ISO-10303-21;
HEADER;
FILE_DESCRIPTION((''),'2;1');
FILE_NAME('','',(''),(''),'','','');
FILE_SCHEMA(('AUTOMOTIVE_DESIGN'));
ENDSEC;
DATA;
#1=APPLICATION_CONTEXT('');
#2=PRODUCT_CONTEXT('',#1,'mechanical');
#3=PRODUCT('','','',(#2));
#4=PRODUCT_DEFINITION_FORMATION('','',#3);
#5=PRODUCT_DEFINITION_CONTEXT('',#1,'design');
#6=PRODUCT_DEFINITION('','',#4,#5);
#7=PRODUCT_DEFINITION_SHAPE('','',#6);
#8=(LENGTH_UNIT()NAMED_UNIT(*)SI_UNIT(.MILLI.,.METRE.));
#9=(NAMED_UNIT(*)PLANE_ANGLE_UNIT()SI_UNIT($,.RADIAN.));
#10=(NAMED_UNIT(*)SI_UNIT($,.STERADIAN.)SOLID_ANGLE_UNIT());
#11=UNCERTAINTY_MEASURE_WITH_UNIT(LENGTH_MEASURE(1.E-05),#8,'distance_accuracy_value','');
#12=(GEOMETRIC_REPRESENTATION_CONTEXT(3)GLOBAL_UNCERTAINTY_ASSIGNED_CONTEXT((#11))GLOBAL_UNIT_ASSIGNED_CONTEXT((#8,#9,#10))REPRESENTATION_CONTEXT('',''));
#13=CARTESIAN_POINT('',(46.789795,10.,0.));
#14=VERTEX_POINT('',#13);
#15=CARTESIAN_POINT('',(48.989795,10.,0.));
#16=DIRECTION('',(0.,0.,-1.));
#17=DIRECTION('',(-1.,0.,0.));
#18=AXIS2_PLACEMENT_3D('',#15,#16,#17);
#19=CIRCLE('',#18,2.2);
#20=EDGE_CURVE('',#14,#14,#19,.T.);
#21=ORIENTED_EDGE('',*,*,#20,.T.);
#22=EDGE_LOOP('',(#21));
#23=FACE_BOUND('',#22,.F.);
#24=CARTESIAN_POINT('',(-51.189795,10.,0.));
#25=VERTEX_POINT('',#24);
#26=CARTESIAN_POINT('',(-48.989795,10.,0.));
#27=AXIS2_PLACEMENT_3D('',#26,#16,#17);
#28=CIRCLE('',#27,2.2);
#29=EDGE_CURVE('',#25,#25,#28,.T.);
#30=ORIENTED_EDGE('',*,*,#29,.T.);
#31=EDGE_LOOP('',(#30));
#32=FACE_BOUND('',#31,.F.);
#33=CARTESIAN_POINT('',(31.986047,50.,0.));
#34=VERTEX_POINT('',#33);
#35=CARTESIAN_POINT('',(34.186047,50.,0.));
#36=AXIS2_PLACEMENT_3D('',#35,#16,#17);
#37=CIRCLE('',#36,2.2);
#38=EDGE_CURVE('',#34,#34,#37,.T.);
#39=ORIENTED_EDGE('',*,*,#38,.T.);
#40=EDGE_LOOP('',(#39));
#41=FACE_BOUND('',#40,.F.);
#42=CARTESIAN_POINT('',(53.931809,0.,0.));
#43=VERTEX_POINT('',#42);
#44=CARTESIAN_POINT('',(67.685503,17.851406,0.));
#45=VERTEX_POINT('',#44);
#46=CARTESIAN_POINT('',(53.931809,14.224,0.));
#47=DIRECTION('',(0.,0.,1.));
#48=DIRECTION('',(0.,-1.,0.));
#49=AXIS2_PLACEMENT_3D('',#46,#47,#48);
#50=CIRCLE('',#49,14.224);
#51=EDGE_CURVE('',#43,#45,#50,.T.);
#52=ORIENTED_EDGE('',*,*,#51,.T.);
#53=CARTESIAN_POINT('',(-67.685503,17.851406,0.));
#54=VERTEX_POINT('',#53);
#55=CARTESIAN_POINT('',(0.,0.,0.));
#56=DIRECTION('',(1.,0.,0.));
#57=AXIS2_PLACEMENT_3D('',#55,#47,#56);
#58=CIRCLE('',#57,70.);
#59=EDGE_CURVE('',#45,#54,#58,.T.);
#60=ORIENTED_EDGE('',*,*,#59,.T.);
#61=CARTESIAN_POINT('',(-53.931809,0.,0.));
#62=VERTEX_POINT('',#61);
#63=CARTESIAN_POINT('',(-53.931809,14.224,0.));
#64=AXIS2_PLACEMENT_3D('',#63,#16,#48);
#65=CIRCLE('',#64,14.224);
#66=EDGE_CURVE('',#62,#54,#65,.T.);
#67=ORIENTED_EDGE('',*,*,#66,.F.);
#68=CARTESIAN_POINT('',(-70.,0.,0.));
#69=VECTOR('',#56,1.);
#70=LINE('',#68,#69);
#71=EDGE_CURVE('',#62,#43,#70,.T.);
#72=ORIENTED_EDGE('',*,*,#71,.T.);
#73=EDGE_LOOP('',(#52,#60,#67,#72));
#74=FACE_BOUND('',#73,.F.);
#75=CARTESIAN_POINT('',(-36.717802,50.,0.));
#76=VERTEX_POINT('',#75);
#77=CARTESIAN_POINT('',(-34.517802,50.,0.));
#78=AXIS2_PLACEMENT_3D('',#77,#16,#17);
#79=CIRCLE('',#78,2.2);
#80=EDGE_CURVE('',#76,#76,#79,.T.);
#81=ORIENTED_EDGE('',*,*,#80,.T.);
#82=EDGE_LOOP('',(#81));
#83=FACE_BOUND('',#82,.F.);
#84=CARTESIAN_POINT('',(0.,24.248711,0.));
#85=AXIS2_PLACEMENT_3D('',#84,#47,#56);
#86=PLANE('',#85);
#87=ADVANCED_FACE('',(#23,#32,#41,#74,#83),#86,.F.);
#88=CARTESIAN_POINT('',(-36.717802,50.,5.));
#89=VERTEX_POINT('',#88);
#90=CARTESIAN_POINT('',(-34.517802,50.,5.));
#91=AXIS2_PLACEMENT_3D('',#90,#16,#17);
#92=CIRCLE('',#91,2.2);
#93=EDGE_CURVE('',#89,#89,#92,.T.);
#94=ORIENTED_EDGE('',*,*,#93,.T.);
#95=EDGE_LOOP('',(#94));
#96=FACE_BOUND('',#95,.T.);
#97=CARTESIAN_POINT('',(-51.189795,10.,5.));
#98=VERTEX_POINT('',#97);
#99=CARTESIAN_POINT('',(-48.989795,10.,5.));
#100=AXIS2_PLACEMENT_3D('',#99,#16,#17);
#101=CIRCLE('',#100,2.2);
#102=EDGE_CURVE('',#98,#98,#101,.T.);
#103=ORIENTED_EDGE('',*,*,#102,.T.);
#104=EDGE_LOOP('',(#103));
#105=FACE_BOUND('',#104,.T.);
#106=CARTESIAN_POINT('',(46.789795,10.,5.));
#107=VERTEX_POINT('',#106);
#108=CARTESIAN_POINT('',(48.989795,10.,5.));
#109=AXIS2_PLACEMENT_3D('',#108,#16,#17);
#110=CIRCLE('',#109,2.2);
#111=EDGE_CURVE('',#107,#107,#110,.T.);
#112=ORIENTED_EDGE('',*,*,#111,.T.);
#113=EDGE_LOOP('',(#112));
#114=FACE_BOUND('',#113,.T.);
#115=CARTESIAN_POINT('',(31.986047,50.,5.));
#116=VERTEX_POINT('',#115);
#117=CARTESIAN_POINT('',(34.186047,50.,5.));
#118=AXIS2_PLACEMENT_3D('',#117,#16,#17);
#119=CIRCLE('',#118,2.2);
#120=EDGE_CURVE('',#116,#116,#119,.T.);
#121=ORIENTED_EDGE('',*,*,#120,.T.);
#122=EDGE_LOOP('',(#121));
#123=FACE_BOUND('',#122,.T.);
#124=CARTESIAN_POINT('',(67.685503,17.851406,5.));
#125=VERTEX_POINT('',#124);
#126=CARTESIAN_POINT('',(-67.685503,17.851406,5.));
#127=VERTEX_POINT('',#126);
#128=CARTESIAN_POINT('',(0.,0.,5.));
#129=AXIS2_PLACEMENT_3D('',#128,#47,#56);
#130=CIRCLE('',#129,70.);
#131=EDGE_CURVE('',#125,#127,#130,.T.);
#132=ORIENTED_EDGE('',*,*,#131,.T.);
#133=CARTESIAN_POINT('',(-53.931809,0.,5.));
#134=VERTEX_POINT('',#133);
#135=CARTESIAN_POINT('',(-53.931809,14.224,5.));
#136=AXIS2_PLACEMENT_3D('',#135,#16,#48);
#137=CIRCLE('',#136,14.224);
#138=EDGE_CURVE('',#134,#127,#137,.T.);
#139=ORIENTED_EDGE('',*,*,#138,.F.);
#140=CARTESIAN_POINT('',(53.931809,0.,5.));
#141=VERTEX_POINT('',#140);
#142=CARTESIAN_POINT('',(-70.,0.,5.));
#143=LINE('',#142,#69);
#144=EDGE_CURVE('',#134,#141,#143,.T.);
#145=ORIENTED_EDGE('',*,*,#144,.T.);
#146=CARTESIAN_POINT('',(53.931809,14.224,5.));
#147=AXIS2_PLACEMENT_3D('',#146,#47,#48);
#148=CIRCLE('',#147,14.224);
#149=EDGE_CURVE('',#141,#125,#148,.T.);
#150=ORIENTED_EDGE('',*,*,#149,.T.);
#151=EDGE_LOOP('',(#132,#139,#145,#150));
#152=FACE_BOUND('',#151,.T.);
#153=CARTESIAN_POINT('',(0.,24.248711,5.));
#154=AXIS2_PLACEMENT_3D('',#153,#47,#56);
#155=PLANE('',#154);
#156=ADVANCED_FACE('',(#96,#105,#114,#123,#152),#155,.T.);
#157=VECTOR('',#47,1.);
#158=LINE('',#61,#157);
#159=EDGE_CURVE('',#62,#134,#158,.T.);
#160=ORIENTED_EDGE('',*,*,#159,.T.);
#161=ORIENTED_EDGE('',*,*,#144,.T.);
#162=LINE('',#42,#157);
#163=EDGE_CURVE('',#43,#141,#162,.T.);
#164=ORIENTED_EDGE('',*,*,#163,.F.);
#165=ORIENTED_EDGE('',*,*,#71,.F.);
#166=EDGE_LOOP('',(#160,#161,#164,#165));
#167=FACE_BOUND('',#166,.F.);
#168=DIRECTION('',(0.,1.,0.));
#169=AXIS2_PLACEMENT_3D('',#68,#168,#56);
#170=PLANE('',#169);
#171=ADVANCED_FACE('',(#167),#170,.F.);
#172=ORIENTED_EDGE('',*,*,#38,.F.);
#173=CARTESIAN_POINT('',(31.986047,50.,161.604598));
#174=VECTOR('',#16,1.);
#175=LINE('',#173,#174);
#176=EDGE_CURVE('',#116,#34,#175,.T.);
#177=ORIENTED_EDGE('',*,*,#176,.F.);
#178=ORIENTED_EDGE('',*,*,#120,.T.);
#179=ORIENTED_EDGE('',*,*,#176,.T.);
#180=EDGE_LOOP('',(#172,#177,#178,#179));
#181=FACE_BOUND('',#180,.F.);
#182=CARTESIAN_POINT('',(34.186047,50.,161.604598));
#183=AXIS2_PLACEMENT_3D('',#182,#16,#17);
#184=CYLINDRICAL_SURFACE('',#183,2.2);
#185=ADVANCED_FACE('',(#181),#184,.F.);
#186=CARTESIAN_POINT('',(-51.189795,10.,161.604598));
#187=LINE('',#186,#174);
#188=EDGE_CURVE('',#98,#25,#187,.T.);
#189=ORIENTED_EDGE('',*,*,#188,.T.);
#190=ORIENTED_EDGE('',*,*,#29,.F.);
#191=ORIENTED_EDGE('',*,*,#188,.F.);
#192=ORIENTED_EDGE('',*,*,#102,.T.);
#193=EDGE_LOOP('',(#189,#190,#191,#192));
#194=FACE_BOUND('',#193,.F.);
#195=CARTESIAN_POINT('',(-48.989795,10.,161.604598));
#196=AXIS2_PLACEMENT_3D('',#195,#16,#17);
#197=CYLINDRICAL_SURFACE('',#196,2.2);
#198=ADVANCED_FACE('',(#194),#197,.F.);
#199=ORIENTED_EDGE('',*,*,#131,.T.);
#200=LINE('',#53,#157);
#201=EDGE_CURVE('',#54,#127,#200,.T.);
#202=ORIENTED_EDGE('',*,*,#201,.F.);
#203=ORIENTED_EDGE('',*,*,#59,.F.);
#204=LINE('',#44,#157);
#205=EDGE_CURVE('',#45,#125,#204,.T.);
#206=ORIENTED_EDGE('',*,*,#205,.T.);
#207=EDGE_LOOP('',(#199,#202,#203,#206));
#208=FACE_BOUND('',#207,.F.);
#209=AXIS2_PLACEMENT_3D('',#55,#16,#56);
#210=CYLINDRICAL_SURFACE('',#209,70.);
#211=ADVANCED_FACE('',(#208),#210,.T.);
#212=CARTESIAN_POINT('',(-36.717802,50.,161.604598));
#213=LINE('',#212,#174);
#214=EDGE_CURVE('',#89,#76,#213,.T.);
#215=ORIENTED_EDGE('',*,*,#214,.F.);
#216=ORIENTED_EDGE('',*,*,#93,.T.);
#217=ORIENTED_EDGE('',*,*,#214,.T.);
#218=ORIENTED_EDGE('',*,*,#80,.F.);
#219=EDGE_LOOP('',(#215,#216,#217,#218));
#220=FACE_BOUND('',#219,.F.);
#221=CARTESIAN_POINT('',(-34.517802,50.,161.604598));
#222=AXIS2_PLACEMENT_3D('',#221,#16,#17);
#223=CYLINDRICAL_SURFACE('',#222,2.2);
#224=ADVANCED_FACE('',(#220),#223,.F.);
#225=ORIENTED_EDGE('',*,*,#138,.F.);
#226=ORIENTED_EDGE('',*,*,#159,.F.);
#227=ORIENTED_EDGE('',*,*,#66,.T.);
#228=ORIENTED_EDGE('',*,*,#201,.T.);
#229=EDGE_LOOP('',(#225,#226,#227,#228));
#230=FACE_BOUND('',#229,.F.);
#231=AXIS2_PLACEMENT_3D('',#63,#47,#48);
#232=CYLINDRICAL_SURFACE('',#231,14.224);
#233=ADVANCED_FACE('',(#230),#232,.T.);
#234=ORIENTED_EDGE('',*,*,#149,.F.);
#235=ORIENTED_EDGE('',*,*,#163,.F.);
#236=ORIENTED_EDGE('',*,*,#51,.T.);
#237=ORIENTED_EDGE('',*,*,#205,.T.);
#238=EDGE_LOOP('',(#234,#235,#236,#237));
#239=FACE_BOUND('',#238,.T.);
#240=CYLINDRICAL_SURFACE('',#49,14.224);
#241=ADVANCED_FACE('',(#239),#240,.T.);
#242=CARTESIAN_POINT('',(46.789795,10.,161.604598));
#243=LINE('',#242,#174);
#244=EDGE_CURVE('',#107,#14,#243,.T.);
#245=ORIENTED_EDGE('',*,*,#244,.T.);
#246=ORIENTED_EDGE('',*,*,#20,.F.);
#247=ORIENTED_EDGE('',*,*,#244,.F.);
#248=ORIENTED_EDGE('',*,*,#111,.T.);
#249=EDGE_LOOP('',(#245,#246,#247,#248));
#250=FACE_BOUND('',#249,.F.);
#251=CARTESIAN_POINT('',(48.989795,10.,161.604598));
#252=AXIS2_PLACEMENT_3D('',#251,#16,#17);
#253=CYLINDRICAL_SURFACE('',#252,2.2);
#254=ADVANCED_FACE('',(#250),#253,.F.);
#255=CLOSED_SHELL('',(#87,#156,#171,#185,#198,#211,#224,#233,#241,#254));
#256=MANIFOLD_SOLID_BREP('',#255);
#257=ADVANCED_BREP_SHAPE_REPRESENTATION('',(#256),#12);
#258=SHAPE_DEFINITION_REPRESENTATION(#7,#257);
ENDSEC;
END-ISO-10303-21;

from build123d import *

# Parameters (mm, degrees)
F1_DEPTH = 5
F3_D     = 4.4
F4_R     = 14.224


with BuildPart() as f1:
    # F0 (on Top) → F1 (new body)
    with BuildSketch(Plane.XY):
        with BuildLine():
            Line((-70, 0), (70, 0))
            ThreePointArc((70, 0), (0, 70), (-70, 0))
        make_face()
    extrude(amount=F1_DEPTH)

    # F3 (through all)
    with Locations(Plane.XY.offset(5)):
        with Locations((-34.5178022981, 50), (34.1860465705, 50), (48.9897948557, 10), (-48.9897948557, 10)):
            Hole(F3_D / 2)

    # F4
    f4_edges = [f1.edges().sort_by_distance(p)[0] for p in [
        (70, 0, 2.5),
        (-70, 0, 2.5),
    ]]
    fillet(f4_edges, radius=F4_R)


solid = f1.part
